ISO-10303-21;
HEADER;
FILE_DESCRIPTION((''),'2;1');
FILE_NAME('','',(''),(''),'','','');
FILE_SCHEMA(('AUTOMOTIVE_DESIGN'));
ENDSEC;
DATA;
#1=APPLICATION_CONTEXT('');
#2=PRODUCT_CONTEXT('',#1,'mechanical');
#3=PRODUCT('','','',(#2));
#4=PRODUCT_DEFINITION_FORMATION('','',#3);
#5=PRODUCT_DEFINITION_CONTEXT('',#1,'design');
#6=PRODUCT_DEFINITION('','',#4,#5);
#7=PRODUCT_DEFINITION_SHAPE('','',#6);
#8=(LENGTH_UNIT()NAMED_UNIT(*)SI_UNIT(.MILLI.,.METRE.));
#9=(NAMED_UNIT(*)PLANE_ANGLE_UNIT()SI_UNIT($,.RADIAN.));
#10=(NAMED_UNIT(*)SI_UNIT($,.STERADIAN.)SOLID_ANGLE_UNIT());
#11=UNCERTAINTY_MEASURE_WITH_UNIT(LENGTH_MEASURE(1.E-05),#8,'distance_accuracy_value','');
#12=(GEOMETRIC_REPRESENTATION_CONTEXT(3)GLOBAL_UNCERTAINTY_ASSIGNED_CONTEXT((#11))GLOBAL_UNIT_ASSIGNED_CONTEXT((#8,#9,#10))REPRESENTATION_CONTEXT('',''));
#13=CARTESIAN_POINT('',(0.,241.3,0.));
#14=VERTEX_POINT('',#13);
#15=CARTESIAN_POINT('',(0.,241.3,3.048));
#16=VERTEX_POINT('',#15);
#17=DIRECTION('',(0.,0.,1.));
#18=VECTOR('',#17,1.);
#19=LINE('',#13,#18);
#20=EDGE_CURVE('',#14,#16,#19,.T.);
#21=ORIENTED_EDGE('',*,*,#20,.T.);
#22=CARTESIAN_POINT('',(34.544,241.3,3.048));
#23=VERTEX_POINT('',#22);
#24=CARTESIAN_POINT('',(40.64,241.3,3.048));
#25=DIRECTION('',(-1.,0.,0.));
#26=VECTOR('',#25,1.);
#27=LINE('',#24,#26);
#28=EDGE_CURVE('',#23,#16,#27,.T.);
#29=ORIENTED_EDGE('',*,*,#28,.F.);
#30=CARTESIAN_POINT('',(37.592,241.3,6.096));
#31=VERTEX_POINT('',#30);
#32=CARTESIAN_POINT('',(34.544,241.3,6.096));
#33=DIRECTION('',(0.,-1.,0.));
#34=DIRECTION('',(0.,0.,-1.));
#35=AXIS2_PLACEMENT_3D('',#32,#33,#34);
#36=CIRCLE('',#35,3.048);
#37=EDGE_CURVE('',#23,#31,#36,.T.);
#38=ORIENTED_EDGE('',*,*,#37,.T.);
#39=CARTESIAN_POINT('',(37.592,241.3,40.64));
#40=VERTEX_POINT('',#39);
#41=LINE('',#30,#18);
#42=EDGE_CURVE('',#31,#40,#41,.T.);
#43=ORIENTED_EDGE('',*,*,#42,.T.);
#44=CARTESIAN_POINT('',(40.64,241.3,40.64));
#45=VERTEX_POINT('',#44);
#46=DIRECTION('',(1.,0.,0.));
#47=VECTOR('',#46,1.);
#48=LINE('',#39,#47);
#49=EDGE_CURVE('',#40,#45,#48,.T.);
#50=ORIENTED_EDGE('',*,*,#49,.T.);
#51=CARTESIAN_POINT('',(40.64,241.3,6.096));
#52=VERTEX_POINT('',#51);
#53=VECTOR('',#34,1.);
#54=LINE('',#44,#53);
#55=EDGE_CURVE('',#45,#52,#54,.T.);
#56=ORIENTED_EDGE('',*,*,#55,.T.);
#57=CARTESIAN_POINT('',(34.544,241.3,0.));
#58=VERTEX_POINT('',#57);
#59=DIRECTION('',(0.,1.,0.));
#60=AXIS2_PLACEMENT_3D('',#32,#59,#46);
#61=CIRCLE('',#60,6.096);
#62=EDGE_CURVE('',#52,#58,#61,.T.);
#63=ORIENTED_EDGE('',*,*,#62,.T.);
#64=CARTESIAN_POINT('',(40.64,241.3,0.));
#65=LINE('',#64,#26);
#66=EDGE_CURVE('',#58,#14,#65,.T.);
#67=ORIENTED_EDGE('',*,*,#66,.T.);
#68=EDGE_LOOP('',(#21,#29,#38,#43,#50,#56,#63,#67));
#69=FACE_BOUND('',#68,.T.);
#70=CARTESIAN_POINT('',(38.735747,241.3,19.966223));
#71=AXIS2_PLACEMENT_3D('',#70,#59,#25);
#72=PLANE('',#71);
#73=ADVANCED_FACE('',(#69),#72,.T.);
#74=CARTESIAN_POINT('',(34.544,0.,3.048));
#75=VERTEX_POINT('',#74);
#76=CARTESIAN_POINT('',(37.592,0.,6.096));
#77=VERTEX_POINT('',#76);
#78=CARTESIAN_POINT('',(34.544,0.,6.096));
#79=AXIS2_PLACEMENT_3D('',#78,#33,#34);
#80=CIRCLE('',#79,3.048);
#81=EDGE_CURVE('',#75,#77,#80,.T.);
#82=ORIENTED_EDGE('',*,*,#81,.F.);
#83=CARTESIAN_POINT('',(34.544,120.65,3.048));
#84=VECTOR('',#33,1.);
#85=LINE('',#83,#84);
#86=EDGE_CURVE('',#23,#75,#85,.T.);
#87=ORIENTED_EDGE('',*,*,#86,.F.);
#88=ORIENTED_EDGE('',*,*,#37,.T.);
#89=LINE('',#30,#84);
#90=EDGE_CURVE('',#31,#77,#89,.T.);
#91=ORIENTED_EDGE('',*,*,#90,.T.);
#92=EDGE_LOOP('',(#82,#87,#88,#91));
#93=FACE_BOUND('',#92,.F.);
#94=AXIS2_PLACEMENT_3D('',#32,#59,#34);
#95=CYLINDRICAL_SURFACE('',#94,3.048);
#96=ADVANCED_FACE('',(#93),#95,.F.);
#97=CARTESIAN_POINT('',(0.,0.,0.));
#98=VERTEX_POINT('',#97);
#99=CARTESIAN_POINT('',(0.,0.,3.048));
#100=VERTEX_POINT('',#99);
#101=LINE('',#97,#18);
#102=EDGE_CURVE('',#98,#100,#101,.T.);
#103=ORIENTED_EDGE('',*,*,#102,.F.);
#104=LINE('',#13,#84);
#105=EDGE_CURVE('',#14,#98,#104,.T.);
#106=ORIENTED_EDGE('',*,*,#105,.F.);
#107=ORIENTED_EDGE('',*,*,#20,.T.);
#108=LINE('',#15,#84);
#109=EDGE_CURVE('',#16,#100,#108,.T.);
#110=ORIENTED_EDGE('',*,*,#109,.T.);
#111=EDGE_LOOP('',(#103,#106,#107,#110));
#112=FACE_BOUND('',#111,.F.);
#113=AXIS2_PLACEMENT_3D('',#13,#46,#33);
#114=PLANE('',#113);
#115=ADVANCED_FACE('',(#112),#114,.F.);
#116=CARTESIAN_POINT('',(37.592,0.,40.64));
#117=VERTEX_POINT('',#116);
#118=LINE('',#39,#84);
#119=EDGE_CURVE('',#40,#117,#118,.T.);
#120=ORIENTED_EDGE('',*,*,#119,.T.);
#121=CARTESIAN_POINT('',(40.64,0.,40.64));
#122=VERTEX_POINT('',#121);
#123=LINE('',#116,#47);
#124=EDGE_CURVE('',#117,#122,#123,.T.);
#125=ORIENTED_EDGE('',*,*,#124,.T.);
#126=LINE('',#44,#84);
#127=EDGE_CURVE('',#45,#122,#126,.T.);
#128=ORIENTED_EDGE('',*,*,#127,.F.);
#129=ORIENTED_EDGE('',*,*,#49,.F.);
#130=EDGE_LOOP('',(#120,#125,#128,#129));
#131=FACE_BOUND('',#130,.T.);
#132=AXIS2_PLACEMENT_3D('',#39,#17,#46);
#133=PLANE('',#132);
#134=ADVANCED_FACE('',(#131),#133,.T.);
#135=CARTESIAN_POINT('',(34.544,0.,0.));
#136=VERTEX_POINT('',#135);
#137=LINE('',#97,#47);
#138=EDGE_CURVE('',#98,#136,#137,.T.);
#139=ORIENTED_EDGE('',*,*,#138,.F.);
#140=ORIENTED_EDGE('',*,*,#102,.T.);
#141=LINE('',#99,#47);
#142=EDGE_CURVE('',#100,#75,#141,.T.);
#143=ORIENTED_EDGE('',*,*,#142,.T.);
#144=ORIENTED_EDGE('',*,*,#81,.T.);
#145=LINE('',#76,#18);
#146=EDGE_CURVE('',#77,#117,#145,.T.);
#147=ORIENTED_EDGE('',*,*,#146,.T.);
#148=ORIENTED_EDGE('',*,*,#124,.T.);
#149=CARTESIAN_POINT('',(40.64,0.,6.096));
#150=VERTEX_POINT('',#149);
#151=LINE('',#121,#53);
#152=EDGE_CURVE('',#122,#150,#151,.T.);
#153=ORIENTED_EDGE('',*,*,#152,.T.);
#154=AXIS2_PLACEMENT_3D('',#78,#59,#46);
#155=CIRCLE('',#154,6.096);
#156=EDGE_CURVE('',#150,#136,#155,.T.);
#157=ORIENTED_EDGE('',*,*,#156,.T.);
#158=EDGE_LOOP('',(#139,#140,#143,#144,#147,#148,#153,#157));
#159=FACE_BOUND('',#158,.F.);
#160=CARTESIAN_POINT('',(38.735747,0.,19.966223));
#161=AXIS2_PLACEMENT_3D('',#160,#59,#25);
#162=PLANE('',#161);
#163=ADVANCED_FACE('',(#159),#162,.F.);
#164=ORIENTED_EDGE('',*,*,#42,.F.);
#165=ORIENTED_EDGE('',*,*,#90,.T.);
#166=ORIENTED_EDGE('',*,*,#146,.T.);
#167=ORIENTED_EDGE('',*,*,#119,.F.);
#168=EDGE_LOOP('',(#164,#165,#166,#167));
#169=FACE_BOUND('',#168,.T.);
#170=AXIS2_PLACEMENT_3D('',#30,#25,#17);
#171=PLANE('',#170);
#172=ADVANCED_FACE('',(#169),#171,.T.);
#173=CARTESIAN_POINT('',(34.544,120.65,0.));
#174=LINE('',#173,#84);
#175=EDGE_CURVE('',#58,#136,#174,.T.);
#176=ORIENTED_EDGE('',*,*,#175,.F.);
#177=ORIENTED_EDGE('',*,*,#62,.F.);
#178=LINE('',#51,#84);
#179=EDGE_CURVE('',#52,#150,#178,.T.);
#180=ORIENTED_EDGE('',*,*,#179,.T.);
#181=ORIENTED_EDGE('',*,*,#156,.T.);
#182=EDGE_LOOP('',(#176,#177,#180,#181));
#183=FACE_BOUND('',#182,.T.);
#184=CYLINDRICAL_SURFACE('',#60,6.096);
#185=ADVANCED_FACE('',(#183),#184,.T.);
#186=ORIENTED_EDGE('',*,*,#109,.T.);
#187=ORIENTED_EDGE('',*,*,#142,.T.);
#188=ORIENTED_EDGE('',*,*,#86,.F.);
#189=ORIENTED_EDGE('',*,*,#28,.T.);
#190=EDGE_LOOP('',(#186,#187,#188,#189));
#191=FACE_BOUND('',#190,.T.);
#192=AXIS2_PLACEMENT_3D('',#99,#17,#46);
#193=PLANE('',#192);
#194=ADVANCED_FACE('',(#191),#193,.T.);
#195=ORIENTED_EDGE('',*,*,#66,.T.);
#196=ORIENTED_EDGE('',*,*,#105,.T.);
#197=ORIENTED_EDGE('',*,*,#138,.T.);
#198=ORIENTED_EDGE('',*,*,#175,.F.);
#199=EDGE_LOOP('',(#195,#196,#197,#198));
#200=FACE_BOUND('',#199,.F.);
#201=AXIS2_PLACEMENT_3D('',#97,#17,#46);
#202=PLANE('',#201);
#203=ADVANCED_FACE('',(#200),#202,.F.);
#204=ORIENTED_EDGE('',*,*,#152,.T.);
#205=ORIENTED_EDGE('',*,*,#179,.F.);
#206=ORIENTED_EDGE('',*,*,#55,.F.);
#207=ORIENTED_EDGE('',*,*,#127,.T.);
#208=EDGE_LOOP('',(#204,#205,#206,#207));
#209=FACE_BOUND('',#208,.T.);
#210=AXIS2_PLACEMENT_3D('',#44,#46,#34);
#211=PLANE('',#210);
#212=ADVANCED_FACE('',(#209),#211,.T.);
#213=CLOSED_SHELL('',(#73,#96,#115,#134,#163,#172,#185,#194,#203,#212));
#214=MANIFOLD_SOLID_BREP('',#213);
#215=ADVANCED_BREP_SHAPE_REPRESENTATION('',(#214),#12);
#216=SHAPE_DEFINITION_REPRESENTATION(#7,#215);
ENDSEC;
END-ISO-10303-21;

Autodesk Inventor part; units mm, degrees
ref_plane "YZ Plane" through (0, 0, 0) normal (1, 0, 0) x (0, 1, 0)
ref_plane "XZ Plane" through (0, 0, 0) normal (0, 1, 0) x (-1, 0, 0)
ref_plane "XY Plane" through (0, 0, 0) normal (0, 0, 1) x (1, 0, 0)
sketch "Sketch1" plane through (0, 0, 0) normal (0, 0, 1) x (1, 0, 0)
  line L0 (0, 0) -> (40.64, 0)
  line L1 (40.64, 0) -> (40.64, 241.3)
  line L2 (40.64, 241.3) -> (0, 241.3)
  line L3 (0, 241.3) -> (0, 0)
  dimension "d0" = 40.64
  dimension "d1" = 241.3
extrude "Plate1" add sketch "Sketch1" along normal blind 3.048
sketch "Sketch3" plane through (37.592, 241.3, 0) normal (1, 0, 0) x (0, 1, 0)
  line L0 (-241.3, 0) -> (0, 0)
  line L1 (0, 0) -> (0, 40.64)
  line L2 (0, 40.64) -> (-241.3, 40.64)
  line L3 (-241.3, 40.64) -> (-241.3, 0)
edge flange "Flange1" height 40.64 angle 90 thickness 3.048 bend radius 3.048 thickness toward (1, 0, 0) relief tear relief width 3.048 relief depth 1.524 edges at (40.64, 120.65, 3.048) wall of the first edge with corners at (37.592, 0, 0) (37.592, 241.3, 0) (37.592, 241.3, 40.64) (37.592, 0, 40.64)
bend "Bend1"
corner "Corner1"
equation "\"d4\" = BendReliefWidth"
equation "\"d5\" = BendReliefDepth"
equation "\"d6\" = MinimumRemnant"
equation "\"d7\" = BendRadius"
equation "\"d10\" = BendRadius"
equation "\"d11\" = CornerReliefSize"
equation "\"d12\" = GapSize"
equation "\"d13\" = JacobiRadiusSize"
equation "\"BendRadius\" = Thickness"
equation "\"BendReliefWidth\" = Thickness"
equation "\"BendReliefDepth\" = 0.5 * Thickness"
equation "\"CornerReliefSize\" = 4 * Thickness"
equation "\"MinimumRemnant\" = 2 * Thickness"
equation "\"TransitionRadius\" = BendRadius"
equation "\"JacobiRadiusSize\" = BendRadius"
equation "\"GapSize\" = Thickness"
equation "\"d2\" = BendRadius"
equation "\"Thickness\" = 3.048"
properties part number "CarLbraket"
